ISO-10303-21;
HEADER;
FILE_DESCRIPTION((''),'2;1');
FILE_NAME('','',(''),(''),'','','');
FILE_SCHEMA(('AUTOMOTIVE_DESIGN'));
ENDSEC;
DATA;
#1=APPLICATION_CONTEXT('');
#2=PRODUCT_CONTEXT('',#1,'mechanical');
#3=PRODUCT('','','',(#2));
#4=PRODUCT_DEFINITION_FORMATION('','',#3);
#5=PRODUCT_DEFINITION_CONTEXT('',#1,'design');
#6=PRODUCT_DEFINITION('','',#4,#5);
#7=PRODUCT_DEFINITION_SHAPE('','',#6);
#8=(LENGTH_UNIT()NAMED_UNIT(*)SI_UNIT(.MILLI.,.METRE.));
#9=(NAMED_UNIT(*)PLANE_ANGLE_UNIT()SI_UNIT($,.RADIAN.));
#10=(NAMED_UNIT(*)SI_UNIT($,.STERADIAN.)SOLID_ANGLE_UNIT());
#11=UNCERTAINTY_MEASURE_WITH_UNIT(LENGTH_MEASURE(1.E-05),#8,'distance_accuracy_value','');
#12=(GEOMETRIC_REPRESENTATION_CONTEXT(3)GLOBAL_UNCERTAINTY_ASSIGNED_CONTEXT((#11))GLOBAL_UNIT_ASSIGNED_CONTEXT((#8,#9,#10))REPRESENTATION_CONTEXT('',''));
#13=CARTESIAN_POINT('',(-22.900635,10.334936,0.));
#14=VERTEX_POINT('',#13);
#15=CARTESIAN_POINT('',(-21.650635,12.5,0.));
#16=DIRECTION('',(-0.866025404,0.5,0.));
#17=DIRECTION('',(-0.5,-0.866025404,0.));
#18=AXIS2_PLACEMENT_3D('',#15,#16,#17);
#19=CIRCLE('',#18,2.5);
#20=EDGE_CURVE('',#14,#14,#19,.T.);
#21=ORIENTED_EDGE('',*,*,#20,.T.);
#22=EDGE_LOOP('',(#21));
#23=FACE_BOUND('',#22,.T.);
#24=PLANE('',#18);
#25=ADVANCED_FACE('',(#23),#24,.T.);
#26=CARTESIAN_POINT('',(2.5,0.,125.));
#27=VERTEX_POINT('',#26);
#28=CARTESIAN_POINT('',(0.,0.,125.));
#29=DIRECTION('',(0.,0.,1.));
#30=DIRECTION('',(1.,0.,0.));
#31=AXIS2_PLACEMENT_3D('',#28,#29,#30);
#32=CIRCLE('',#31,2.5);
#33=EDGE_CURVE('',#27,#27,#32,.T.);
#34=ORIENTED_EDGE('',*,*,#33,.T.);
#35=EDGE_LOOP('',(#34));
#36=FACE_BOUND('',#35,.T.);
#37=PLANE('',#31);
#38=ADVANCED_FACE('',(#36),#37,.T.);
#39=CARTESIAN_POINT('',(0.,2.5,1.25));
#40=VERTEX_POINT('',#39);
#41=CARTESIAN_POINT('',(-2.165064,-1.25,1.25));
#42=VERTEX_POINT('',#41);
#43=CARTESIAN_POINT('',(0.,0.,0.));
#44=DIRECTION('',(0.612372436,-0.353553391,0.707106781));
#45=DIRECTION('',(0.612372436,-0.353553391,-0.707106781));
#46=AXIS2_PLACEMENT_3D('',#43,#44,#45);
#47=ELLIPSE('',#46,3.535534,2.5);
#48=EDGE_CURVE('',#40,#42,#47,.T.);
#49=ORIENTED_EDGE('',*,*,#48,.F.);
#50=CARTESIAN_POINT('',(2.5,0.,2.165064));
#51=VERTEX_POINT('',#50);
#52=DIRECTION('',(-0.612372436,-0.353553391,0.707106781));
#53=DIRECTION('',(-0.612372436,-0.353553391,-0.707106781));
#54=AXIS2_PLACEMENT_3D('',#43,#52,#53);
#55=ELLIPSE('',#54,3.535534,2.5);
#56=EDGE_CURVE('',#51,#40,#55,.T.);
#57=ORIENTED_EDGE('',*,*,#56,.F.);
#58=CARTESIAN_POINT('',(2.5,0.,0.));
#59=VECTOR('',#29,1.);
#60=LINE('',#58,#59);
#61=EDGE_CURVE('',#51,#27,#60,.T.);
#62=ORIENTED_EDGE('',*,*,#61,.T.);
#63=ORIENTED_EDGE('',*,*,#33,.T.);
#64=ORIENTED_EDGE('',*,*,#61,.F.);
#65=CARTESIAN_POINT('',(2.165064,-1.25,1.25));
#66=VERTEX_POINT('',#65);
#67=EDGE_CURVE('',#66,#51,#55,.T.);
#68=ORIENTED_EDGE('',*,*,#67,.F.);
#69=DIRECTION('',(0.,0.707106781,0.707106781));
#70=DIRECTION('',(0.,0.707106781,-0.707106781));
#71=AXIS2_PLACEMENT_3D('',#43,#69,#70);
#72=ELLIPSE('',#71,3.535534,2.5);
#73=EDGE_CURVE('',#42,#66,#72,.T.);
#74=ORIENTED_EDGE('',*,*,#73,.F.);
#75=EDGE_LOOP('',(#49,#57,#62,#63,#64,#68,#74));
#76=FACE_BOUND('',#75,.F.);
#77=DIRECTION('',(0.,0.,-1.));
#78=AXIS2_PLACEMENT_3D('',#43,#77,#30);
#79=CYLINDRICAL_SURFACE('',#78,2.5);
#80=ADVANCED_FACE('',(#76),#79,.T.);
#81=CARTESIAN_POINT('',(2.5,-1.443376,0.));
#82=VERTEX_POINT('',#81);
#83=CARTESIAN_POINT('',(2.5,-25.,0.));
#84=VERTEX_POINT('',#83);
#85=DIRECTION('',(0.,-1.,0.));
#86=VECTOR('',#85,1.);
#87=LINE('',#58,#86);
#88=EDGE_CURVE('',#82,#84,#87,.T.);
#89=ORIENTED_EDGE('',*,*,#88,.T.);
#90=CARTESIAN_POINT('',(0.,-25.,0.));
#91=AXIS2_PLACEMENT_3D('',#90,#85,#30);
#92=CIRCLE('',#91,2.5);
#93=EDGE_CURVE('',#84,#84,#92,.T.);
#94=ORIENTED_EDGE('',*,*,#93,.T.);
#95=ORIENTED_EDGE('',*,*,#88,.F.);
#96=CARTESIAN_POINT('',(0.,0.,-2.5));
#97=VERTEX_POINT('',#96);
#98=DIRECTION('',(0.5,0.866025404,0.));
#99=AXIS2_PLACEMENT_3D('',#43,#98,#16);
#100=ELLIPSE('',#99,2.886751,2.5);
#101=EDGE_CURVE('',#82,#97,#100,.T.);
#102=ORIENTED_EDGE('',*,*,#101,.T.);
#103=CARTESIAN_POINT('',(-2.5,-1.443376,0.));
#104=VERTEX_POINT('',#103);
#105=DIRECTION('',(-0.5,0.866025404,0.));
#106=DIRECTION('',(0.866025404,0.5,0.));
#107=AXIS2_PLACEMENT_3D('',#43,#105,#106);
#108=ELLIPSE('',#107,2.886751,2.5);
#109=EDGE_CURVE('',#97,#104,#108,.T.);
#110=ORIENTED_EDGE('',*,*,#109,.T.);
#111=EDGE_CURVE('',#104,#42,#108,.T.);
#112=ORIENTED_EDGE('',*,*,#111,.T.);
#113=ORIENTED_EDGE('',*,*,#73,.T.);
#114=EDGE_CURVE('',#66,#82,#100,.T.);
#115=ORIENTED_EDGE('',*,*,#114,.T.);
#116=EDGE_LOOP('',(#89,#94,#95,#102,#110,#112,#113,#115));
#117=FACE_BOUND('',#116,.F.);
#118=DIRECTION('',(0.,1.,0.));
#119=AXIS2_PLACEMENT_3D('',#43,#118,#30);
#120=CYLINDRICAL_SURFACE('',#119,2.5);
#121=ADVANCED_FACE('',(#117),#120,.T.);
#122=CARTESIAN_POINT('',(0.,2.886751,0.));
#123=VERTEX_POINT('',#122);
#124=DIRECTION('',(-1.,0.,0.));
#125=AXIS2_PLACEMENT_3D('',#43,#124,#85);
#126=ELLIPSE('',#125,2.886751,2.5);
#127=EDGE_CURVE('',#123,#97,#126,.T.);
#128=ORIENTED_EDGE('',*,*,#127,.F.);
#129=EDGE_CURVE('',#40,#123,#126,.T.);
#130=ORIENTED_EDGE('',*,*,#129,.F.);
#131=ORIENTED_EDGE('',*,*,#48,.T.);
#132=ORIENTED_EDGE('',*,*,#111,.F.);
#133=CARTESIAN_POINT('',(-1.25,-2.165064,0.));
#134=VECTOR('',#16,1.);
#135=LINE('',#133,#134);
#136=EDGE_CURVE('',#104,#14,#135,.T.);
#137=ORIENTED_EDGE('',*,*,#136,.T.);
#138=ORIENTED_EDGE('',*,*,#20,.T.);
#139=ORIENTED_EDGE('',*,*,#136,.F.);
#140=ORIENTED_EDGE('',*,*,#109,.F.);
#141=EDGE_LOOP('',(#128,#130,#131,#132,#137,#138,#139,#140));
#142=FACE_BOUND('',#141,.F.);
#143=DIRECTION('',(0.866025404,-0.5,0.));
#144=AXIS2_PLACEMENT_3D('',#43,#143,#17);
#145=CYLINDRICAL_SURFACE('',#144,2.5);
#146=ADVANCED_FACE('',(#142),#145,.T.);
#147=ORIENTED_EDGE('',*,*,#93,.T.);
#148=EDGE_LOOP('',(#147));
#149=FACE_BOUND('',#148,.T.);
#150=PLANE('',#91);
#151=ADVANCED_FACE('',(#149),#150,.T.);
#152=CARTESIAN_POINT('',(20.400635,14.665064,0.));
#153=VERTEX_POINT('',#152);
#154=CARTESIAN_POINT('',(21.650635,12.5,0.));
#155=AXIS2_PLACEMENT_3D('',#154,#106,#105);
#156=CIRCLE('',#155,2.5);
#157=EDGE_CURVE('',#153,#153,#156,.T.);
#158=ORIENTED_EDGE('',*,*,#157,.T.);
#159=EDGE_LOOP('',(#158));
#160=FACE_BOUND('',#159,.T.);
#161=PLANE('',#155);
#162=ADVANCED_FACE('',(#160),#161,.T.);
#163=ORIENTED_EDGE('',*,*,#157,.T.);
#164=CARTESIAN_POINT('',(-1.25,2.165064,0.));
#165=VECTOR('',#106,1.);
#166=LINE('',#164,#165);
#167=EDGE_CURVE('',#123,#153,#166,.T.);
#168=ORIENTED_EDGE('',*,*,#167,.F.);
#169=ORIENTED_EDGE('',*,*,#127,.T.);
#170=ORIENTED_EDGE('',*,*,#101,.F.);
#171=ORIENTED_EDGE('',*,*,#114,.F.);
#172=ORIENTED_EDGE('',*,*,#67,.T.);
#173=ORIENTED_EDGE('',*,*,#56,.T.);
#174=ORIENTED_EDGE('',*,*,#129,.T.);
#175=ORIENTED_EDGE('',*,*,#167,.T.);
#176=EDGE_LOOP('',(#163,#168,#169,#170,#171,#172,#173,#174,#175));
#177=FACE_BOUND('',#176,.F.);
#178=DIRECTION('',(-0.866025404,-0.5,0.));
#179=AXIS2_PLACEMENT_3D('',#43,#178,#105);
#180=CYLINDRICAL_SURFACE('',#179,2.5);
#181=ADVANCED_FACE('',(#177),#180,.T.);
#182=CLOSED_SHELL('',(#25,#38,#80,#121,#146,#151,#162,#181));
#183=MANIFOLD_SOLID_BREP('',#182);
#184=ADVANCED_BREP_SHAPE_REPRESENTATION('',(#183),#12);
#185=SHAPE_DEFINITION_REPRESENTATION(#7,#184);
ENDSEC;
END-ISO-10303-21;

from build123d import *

# Parameters (mm, degrees)
F0_R     = 2.5
F1_DEPTH = 25
F3_COUNT = 3
F2_R     = 2.5
F4_DEPTH = 125


with BuildPart() as f1:
    # F0 (on Front) → F1 (new body)
    with BuildSketch(Plane.XZ):
        Circle(F0_R)
    extrude(amount=F1_DEPTH)


with BuildPart() as f3_1:
    # F3: instance of F1
    add(f1.part.rotate(Axis((0, 0, 0), (0, 0, 1)), 1 * 360 / F3_COUNT))


with BuildPart() as f3_2:
    # F3: instance of F1
    add(f1.part.rotate(Axis((0, 0, 0), (0, 0, 1)), 2 * 360 / F3_COUNT))


with BuildPart() as f1_1:
    add(f1.part)

    add(f3_1.part)  # F4 merges F3_1

    add(f3_2.part)  # F4 merges F3_2
    # F2 (on Top) → F4 (join)
    with BuildSketch(Plane.XY):
        Circle(F2_R)
    extrude(amount=F4_DEPTH)


solid = f1_1.part
